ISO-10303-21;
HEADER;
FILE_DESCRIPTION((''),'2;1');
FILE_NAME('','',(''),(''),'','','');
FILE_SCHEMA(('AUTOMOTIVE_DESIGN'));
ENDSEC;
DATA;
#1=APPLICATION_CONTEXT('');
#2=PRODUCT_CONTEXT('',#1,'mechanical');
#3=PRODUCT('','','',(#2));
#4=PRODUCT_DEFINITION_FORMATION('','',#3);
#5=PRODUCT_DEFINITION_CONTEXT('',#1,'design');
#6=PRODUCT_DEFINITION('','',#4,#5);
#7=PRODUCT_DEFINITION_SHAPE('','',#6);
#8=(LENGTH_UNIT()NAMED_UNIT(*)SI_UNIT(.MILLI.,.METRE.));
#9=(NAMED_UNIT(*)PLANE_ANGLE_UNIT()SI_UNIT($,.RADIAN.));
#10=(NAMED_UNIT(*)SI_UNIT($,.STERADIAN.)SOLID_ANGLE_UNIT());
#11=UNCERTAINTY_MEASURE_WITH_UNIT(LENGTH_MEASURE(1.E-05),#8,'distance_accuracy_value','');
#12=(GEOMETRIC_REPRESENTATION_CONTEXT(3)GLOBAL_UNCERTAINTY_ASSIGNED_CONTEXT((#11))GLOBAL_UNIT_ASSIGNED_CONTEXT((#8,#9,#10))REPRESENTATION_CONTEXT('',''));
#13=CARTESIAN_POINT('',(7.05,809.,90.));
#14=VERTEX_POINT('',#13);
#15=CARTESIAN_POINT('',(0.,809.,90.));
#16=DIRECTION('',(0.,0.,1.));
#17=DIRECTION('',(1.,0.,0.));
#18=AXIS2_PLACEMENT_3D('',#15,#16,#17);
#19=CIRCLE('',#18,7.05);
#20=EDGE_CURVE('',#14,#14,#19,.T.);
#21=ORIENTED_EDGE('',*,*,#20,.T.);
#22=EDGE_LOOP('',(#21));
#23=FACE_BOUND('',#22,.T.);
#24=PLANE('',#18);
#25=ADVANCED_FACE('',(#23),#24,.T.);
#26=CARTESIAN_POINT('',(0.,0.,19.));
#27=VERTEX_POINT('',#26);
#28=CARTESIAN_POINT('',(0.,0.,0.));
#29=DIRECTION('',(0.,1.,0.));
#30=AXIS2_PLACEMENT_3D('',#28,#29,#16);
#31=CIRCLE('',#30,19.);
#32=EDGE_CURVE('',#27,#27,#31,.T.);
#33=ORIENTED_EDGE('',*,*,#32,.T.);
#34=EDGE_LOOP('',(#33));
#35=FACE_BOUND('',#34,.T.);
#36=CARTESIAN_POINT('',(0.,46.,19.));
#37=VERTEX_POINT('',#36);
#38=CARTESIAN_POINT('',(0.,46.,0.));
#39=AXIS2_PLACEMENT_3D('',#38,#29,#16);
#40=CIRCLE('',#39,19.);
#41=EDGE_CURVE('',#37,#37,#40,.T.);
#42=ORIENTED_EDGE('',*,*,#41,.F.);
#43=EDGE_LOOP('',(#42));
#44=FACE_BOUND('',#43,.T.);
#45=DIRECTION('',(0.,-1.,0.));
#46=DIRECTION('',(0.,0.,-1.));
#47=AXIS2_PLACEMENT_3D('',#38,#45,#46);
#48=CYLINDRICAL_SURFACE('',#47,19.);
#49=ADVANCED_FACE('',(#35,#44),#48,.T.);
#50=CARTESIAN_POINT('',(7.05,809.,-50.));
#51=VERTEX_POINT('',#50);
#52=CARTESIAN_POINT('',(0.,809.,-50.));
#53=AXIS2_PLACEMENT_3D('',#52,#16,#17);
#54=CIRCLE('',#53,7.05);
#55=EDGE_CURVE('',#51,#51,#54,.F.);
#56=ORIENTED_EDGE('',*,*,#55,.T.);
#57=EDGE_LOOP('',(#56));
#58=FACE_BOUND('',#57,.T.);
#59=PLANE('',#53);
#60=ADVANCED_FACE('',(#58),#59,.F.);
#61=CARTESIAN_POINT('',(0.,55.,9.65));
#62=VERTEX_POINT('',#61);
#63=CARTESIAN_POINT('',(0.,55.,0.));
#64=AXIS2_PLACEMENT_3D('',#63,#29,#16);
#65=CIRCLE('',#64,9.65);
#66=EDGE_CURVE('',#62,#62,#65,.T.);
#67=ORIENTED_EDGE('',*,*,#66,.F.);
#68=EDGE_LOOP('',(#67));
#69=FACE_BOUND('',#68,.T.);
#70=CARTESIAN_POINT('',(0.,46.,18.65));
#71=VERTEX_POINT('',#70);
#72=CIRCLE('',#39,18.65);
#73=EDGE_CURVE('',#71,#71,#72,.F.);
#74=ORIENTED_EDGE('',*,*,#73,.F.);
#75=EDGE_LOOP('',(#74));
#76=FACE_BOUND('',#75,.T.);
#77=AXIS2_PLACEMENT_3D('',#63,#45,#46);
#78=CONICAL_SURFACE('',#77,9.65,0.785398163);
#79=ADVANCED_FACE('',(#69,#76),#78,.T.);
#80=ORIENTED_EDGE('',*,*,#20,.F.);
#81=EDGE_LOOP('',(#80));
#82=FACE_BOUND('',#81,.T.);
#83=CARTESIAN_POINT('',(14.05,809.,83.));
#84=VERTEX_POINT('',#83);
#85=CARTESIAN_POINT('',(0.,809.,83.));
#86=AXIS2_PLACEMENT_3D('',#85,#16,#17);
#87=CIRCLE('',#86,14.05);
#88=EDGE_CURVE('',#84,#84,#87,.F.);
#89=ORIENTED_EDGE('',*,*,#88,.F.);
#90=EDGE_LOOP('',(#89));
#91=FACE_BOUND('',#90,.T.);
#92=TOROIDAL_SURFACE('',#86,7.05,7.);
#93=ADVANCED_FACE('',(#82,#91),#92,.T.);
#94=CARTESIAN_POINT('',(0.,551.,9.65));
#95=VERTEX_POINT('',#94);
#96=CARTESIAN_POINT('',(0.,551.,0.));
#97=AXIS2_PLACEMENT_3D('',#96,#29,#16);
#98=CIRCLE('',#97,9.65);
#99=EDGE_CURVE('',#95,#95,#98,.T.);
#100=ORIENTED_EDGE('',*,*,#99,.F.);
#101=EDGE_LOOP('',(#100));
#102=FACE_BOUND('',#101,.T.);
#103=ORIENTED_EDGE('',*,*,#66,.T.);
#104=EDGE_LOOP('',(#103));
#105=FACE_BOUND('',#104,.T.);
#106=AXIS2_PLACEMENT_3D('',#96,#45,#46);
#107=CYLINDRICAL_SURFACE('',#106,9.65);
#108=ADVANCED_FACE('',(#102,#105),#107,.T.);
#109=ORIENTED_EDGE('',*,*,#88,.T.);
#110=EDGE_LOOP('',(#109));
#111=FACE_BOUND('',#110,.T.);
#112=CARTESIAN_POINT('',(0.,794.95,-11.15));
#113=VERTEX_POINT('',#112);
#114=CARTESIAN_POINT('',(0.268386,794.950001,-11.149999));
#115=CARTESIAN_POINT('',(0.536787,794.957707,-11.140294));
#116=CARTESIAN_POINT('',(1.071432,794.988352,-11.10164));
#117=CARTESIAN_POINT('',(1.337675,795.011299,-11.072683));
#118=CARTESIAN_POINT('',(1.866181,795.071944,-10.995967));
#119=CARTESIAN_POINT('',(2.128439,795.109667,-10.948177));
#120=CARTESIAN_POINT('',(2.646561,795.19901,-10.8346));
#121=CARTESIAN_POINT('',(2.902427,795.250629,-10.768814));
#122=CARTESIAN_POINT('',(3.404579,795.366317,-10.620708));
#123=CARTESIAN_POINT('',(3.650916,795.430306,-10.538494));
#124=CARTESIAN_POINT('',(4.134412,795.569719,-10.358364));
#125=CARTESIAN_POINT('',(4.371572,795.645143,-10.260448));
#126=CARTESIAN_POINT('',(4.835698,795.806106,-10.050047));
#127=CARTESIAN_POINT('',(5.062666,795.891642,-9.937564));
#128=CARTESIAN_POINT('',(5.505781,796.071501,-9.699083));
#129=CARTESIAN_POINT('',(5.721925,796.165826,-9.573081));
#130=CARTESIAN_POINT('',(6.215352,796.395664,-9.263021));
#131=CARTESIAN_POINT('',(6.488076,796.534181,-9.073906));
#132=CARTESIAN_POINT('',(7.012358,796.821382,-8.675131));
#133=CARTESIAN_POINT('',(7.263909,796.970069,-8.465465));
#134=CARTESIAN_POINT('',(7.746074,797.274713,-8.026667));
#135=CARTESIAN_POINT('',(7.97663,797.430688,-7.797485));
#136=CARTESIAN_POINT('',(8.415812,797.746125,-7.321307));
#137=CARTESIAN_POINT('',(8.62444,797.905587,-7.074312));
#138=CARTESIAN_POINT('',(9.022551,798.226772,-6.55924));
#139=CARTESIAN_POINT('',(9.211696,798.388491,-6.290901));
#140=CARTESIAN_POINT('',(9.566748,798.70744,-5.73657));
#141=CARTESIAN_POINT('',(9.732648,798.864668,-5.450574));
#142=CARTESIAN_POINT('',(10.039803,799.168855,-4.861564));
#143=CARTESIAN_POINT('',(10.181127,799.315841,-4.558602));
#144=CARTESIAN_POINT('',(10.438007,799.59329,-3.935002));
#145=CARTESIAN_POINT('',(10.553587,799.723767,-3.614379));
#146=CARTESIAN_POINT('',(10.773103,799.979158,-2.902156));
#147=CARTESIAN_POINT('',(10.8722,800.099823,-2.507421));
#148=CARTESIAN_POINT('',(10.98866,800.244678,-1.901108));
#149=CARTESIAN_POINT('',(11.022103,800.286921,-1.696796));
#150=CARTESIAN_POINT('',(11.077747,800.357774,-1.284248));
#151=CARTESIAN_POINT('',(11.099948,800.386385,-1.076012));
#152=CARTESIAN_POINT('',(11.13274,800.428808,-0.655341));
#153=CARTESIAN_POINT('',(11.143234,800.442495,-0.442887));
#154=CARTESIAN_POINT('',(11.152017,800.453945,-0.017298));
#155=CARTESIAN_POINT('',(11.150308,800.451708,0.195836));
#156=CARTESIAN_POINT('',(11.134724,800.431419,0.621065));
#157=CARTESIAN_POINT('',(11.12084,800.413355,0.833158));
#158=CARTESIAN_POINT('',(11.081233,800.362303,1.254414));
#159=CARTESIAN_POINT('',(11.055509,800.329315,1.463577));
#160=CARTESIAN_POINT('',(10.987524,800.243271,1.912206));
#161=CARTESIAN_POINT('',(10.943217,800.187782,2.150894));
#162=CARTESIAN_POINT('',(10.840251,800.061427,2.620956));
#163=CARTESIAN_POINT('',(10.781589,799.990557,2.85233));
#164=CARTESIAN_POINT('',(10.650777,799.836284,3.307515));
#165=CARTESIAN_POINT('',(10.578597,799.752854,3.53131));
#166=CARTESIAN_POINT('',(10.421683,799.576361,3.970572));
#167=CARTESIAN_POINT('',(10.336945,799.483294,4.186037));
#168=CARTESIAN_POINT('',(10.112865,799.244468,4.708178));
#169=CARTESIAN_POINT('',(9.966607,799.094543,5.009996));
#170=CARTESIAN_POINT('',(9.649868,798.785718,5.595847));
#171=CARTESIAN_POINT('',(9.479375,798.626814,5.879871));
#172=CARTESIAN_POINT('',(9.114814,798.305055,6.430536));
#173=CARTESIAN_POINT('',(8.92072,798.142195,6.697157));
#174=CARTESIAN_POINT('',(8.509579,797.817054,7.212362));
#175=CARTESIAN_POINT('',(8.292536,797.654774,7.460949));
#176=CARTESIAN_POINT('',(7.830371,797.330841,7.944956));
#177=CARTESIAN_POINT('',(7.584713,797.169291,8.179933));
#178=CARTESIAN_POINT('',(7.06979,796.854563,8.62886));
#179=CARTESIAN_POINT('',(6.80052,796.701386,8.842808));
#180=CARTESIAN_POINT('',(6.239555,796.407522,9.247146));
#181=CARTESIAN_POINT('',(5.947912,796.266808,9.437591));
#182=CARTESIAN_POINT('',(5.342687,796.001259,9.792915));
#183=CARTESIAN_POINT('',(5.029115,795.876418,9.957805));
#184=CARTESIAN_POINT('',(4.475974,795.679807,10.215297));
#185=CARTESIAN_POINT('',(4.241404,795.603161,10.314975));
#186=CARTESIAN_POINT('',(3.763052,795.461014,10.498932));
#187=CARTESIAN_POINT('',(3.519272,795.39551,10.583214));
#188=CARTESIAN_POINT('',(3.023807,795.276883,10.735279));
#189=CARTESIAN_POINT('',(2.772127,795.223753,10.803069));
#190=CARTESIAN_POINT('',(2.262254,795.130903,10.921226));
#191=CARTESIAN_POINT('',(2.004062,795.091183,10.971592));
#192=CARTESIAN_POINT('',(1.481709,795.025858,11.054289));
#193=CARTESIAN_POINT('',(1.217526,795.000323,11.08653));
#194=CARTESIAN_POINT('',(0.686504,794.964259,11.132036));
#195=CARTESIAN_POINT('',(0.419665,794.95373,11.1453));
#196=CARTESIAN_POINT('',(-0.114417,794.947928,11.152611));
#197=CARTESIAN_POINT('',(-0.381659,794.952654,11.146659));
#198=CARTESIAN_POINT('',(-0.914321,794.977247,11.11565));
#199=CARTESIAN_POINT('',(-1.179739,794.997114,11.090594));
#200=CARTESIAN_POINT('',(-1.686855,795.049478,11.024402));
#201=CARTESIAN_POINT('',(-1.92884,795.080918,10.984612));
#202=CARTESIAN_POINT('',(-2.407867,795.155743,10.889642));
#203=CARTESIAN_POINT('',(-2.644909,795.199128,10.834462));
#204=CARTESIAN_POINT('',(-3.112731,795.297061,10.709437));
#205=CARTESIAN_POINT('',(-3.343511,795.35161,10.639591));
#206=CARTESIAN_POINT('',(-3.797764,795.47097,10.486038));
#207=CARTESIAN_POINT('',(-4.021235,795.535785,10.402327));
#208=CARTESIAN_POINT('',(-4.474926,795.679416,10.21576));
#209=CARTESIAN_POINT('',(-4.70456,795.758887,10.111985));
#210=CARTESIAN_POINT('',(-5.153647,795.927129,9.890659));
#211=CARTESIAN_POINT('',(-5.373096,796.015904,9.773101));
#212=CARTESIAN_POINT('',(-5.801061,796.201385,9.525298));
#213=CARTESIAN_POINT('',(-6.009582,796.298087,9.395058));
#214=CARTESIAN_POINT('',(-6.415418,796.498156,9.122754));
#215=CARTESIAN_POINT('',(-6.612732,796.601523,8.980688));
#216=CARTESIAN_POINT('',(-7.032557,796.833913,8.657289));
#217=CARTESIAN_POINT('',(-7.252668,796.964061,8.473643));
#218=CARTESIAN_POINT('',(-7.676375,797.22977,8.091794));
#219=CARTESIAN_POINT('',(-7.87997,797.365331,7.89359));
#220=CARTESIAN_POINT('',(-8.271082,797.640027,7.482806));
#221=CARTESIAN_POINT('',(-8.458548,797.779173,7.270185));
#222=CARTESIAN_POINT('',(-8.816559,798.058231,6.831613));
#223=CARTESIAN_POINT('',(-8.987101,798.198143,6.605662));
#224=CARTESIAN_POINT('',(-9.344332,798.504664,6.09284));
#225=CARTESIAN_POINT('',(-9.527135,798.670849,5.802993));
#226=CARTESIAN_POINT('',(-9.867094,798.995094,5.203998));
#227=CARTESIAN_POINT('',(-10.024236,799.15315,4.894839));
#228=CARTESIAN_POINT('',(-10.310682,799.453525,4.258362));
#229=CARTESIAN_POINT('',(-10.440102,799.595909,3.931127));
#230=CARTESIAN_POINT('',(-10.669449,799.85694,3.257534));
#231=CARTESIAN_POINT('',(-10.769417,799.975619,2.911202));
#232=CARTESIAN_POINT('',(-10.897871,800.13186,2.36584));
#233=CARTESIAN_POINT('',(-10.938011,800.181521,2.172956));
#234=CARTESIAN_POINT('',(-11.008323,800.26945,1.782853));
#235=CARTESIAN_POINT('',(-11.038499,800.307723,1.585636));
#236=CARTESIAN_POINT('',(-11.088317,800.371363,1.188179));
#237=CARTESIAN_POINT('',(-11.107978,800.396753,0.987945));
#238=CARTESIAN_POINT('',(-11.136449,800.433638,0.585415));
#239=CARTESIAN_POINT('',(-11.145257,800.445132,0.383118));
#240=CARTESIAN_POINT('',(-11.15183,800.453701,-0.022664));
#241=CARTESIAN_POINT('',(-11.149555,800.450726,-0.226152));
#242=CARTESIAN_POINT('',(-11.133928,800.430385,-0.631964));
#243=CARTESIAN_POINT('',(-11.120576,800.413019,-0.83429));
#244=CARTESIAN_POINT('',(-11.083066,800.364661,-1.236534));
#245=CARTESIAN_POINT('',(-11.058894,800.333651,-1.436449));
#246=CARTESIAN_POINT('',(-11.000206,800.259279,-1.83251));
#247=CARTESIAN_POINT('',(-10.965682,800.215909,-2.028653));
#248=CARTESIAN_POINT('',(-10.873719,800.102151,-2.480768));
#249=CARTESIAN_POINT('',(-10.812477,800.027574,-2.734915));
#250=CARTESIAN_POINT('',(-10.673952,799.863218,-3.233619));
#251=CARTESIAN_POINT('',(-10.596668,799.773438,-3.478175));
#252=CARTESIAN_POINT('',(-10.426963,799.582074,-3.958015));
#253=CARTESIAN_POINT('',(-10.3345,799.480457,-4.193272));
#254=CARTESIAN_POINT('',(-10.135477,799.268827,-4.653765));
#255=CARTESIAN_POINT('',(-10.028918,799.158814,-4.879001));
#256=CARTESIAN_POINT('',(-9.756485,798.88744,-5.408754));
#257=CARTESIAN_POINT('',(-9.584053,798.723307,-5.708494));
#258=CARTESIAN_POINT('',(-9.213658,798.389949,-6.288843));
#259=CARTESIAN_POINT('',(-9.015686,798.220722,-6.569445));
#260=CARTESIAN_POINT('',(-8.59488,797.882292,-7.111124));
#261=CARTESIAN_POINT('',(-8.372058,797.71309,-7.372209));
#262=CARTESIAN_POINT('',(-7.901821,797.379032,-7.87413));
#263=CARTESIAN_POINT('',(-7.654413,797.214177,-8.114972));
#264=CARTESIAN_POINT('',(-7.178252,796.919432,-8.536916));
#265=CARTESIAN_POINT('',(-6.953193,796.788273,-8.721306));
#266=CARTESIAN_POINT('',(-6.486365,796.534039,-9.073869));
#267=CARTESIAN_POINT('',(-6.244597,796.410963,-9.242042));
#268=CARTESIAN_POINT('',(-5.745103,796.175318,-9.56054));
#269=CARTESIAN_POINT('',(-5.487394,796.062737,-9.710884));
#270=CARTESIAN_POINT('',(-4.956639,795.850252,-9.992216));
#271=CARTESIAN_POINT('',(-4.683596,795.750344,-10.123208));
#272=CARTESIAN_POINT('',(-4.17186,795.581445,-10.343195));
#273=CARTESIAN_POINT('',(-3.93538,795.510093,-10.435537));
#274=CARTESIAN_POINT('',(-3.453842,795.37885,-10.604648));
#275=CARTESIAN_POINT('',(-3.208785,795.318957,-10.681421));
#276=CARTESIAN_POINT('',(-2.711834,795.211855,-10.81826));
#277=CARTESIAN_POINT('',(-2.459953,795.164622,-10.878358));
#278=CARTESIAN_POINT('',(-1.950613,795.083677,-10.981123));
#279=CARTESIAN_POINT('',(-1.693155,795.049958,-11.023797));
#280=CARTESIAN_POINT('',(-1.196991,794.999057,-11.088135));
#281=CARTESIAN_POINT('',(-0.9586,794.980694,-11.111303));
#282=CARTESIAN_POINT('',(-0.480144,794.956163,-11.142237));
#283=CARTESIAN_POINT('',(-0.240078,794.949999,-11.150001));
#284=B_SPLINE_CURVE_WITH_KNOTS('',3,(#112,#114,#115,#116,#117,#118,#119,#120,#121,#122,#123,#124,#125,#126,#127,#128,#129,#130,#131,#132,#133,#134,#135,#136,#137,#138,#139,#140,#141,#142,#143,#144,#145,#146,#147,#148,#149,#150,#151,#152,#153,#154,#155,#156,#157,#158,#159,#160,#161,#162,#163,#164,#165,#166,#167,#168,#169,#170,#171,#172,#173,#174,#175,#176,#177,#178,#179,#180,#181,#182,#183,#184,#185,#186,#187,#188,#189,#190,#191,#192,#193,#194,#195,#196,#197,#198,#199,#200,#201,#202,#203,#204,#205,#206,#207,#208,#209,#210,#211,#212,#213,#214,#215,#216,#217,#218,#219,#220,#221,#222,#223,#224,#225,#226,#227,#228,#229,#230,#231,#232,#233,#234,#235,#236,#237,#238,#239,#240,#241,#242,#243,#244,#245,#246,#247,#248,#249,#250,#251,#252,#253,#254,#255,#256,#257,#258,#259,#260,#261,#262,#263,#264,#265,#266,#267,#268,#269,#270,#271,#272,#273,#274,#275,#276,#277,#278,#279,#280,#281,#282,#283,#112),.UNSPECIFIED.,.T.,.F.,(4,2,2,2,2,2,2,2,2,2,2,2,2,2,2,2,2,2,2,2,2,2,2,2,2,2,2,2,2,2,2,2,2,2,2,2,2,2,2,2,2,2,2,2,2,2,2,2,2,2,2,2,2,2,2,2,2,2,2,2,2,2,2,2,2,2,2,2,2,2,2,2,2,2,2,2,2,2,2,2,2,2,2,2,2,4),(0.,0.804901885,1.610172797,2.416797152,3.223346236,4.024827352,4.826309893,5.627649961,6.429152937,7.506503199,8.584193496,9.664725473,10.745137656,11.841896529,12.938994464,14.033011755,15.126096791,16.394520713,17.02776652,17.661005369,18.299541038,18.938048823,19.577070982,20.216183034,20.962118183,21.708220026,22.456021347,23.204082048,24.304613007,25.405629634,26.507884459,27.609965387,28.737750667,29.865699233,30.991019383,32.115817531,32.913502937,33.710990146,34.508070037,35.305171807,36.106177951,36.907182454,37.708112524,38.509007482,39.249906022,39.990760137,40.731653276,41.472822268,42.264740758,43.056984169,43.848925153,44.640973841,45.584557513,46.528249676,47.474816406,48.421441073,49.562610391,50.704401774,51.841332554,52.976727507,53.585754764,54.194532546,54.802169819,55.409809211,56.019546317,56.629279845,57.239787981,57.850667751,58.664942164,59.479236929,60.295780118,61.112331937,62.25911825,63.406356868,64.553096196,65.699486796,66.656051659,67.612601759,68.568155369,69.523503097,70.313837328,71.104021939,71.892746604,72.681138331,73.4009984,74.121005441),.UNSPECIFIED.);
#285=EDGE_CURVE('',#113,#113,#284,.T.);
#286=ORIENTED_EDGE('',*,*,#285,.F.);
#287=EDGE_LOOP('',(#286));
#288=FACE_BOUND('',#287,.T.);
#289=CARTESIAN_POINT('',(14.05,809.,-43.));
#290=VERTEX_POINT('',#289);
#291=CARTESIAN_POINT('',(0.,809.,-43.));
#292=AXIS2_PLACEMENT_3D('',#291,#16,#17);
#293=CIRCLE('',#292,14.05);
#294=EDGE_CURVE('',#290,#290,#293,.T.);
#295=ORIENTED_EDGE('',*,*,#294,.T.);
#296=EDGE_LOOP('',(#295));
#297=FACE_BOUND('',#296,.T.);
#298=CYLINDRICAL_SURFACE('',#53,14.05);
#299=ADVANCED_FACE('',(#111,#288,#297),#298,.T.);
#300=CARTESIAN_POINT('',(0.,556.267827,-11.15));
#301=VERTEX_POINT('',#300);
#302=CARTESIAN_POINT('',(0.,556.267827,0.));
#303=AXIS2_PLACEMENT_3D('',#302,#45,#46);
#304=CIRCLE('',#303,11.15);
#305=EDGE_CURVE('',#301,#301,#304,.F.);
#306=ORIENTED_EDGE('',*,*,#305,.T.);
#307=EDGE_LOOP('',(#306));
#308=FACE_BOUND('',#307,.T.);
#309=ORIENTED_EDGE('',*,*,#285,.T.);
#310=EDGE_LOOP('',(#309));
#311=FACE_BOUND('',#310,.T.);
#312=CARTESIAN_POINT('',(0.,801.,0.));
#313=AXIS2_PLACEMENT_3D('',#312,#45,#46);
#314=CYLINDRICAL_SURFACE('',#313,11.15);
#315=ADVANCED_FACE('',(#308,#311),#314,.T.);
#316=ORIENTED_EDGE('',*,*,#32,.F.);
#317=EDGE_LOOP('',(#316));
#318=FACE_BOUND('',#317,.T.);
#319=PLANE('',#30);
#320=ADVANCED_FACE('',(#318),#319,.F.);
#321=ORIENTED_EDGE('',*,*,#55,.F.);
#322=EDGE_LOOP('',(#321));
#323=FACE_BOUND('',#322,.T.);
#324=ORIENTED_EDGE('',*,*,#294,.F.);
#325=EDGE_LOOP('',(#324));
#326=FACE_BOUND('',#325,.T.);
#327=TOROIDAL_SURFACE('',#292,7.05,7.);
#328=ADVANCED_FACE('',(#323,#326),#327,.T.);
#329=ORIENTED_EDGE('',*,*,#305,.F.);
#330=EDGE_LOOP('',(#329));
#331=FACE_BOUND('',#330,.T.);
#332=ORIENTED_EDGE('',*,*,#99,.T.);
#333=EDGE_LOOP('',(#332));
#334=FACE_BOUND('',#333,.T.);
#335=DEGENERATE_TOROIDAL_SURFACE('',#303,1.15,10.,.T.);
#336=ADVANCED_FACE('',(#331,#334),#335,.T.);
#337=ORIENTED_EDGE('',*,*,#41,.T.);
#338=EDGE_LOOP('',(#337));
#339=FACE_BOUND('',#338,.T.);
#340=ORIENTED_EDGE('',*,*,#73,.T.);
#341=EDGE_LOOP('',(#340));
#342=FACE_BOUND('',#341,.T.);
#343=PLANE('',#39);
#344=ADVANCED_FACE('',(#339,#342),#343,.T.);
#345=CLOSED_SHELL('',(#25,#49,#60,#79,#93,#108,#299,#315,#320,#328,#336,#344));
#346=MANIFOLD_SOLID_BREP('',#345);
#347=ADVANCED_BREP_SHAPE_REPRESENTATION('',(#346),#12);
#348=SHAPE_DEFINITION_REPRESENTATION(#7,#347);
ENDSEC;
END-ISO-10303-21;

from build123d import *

# Parameters (mm, degrees)
SKETCH1_R                = 19
BOSS_EXTRUDE1_DEPTH      = 46
SKETCH2_R                = 9.65
BOSS_EXTRUDE2_DEPTH      = 505
SKETCH3_R                = 11.15
BOSS_EXTRUDE3_DEPTH      = 250
CHAMFER1_SIZE            = 9
FILLET1_R                = 10
BOSS_EXTRUDE4_DEPTH      = 90
BOSS_EXTRUDE4_DEPTH_BACK = 50
SKETCH4_R                = 14.05
FILLET2_R                = 7


with BuildPart() as part:
    # Sketch1 → Boss-Extrude1 (new body)
    with BuildSketch(Plane(origin=(0, 0, 0), x_dir=(1, 0, 0), z_dir=(0, 1, 0))):
        with Locations(Location((0, 0, 0), (0, 0, 270))):
            Circle(SKETCH1_R)
    extrude(amount=BOSS_EXTRUDE1_DEPTH)

    # Sketch2 → Boss-Extrude2 (add)
    with BuildSketch(Plane(origin=(0, 46, 0), x_dir=(1, 0, 0), z_dir=(0, 1, 0))):
        with Locations(Location((0, 0, 0), (0, 0, 270))):
            Circle(SKETCH2_R)
    extrude(amount=BOSS_EXTRUDE2_DEPTH)

    # Sketch3 → Boss-Extrude3 (add)
    with BuildSketch(Plane(origin=(0, 551, 0), x_dir=(1, 0, 0), z_dir=(0, 1, 0))):
        with Locations(Location((0, 0, 0), (0, 0, 270))):
            Circle(SKETCH3_R)
    extrude(amount=BOSS_EXTRUDE3_DEPTH)

    # Chamfer1
    chamfer1_edges = [part.edges().sort_by_distance(p)[0] for p in [
        (0, 46, -9.65),
    ]]
    chamfer(chamfer1_edges, length=CHAMFER1_SIZE)

    # Fillet1
    # the kernel refuses this fillet: 10 mm, written as the material it takes off along each edge
    with BuildSketch(Plane(origin=(0, 551, 0), x_dir=(0, 0, 1), z_dir=(-1, 0, 0))) as fillet1_piece_1:
        with BuildLine():
            CenterArc((1.15, 5.267826876), FILLET1_R, 328.211669383, 31.788330617)
            Line((11.15, 5.267826876), (11.35, 5.267826876))
            Line((11.35, 5.267826876), (11.35, 0))
            Line((11.35, 0), (11.15, -0.2))
            ThreePointArc((11.15, -0.2), (10.4, -0.2), (9.82, -0.105356538))
            Line((9.82, -0.105356538), (9.65, 0))
        make_face()
    revolve(axis=Axis((0, 551, 0), (0, 1, 0)), mode=Mode.SUBTRACT)

    # Sketch4 → Boss-Extrude4 (add, two sides: drawn at the far end of the back side and taken through both)
    with BuildSketch(Plane.XY.offset(-BOSS_EXTRUDE4_DEPTH_BACK)):
        with Locations((0, 809)):
            Circle(SKETCH4_R)
    extrude(amount=BOSS_EXTRUDE4_DEPTH + BOSS_EXTRUDE4_DEPTH_BACK)

    # Fillet2
    fillet2_edges = [part.edges().sort_by_distance(p)[0] for p in [
        (-14.05, 809, -50),
        (-14.05, 809, 90),
    ]]
    fillet(fillet2_edges, radius=FILLET2_R)


solid = part.part
